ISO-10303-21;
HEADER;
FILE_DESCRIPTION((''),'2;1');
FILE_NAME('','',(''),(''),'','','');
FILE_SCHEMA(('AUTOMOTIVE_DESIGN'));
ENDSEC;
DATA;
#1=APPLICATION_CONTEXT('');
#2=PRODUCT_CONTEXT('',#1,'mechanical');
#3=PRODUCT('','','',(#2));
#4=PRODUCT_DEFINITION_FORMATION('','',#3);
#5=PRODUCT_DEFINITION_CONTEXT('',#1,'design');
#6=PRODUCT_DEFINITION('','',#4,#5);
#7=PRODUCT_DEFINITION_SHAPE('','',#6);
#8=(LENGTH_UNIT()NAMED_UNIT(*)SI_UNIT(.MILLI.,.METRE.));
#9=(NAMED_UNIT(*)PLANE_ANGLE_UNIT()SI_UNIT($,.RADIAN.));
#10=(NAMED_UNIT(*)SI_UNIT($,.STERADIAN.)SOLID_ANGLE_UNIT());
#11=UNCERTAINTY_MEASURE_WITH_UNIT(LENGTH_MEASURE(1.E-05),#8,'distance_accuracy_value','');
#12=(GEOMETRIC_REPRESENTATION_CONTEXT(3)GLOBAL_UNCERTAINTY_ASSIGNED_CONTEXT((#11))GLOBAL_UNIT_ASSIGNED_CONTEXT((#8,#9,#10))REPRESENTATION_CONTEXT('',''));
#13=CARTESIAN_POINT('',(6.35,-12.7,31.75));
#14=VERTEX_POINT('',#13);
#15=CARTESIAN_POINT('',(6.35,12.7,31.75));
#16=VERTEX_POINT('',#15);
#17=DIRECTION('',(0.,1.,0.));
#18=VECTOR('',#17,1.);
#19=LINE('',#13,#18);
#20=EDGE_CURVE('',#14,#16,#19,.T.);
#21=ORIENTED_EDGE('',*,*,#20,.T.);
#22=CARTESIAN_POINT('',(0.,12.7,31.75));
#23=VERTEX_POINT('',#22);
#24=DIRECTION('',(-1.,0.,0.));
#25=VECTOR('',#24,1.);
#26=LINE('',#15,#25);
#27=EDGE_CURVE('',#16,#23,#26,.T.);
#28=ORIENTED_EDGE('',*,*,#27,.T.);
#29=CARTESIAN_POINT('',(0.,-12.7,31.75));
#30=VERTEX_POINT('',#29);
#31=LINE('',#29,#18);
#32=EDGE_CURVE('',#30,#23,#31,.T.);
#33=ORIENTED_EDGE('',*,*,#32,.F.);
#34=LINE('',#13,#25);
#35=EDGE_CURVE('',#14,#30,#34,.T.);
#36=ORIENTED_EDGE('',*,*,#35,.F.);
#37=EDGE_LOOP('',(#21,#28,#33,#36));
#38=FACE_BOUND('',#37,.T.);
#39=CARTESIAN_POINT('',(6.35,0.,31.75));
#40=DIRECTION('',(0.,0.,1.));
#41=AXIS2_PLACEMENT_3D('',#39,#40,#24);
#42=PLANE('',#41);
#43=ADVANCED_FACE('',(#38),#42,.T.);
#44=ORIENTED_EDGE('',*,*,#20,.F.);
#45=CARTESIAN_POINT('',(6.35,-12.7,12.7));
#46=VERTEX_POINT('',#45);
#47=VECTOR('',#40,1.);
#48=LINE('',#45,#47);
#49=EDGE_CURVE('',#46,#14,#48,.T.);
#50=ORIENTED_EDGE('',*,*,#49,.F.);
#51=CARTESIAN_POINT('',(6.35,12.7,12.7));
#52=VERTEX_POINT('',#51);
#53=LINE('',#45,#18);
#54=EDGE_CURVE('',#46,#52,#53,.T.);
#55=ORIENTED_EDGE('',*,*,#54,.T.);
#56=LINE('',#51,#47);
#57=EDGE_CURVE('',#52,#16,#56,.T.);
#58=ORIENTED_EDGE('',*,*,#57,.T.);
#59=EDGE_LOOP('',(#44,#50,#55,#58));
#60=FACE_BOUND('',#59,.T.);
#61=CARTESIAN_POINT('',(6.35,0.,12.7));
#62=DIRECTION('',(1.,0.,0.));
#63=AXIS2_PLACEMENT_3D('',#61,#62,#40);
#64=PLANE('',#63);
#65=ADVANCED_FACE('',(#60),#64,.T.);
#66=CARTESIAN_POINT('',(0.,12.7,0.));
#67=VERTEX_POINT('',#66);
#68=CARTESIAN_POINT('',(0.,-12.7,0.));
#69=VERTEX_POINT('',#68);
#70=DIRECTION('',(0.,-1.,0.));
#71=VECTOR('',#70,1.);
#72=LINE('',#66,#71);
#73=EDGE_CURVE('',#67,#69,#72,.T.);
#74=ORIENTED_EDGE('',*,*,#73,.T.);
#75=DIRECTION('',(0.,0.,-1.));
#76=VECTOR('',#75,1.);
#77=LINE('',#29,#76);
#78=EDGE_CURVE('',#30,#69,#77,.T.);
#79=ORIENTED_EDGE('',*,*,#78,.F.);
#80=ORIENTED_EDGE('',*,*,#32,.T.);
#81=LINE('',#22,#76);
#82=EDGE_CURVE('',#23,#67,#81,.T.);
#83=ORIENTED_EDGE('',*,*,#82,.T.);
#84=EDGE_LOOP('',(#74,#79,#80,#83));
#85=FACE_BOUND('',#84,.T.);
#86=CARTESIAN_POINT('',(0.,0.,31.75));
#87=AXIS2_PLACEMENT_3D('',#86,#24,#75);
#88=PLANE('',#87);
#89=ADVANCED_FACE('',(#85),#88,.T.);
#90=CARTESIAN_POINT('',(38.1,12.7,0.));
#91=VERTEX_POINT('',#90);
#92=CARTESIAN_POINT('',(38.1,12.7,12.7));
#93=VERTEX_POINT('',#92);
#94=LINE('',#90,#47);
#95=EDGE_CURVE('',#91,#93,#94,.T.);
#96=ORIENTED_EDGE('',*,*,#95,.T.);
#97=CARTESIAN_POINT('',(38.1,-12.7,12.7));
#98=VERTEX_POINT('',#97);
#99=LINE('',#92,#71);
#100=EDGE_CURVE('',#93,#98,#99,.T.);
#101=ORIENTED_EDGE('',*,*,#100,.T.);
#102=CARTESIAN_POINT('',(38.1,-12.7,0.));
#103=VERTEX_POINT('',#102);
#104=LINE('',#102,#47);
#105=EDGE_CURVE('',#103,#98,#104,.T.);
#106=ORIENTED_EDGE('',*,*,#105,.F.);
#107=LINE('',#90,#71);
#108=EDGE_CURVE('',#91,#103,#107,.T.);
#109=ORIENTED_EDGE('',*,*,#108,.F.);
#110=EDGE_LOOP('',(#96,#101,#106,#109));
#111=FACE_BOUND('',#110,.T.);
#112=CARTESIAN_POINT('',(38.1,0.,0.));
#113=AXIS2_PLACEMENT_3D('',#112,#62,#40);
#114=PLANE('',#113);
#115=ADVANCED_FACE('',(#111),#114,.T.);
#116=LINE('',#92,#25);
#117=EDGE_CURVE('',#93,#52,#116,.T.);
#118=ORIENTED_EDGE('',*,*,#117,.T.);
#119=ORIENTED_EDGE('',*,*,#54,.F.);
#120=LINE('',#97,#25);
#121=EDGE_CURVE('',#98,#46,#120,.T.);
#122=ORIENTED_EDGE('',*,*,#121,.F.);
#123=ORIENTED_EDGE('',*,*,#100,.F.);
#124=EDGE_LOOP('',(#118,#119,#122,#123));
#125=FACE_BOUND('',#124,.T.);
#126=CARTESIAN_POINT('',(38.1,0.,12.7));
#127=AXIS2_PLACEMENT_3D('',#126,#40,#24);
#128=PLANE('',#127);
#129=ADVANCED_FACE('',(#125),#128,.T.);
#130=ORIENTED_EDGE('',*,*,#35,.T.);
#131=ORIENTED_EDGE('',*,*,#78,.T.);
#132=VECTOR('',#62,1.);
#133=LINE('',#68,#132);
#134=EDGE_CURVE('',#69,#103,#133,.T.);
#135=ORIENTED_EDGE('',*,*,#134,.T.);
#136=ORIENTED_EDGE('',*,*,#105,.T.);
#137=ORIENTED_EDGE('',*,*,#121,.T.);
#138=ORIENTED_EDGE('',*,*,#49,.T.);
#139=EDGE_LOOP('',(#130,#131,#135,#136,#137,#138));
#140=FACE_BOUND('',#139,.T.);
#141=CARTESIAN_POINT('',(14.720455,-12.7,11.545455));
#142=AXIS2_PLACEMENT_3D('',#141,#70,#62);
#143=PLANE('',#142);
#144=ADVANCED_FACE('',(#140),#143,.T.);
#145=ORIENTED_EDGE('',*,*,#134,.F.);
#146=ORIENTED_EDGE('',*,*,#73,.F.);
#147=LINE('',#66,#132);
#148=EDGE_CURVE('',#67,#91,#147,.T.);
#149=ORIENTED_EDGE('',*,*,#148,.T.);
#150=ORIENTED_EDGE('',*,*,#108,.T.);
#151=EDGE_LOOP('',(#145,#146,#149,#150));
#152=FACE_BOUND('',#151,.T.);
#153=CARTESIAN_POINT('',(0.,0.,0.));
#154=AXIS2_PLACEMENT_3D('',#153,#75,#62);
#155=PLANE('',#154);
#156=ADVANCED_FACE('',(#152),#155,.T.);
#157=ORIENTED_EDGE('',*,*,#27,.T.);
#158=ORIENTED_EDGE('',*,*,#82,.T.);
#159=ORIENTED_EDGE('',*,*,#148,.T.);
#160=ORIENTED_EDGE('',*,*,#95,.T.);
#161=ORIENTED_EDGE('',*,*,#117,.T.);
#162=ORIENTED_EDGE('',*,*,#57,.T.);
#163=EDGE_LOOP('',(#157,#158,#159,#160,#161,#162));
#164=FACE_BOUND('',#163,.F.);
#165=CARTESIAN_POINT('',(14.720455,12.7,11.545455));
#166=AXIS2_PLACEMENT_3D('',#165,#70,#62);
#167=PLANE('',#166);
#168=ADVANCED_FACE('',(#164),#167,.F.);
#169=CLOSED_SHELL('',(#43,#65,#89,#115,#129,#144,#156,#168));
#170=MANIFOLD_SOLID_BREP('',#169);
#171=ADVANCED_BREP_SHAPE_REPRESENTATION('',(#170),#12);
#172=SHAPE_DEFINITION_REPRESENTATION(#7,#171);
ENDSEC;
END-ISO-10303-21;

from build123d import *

# Parameters (mm, degrees)
F1_DEPTH = 12.7


# Not quite as in the source:
# - a feature names something its author has since deleted; it is built from what else it names


with BuildPart() as f1:
    # F0 (on Front) → F1 (new body, symmetric)
    with BuildSketch(Plane.XZ):
        Polygon((0, 31.75), (0, 0), (38.1, 0), (38.1, 12.7), (6.35, 12.7), (6.35, 31.75), align=None)
    extrude(amount=F1_DEPTH, both=True)


solid = f1.part
